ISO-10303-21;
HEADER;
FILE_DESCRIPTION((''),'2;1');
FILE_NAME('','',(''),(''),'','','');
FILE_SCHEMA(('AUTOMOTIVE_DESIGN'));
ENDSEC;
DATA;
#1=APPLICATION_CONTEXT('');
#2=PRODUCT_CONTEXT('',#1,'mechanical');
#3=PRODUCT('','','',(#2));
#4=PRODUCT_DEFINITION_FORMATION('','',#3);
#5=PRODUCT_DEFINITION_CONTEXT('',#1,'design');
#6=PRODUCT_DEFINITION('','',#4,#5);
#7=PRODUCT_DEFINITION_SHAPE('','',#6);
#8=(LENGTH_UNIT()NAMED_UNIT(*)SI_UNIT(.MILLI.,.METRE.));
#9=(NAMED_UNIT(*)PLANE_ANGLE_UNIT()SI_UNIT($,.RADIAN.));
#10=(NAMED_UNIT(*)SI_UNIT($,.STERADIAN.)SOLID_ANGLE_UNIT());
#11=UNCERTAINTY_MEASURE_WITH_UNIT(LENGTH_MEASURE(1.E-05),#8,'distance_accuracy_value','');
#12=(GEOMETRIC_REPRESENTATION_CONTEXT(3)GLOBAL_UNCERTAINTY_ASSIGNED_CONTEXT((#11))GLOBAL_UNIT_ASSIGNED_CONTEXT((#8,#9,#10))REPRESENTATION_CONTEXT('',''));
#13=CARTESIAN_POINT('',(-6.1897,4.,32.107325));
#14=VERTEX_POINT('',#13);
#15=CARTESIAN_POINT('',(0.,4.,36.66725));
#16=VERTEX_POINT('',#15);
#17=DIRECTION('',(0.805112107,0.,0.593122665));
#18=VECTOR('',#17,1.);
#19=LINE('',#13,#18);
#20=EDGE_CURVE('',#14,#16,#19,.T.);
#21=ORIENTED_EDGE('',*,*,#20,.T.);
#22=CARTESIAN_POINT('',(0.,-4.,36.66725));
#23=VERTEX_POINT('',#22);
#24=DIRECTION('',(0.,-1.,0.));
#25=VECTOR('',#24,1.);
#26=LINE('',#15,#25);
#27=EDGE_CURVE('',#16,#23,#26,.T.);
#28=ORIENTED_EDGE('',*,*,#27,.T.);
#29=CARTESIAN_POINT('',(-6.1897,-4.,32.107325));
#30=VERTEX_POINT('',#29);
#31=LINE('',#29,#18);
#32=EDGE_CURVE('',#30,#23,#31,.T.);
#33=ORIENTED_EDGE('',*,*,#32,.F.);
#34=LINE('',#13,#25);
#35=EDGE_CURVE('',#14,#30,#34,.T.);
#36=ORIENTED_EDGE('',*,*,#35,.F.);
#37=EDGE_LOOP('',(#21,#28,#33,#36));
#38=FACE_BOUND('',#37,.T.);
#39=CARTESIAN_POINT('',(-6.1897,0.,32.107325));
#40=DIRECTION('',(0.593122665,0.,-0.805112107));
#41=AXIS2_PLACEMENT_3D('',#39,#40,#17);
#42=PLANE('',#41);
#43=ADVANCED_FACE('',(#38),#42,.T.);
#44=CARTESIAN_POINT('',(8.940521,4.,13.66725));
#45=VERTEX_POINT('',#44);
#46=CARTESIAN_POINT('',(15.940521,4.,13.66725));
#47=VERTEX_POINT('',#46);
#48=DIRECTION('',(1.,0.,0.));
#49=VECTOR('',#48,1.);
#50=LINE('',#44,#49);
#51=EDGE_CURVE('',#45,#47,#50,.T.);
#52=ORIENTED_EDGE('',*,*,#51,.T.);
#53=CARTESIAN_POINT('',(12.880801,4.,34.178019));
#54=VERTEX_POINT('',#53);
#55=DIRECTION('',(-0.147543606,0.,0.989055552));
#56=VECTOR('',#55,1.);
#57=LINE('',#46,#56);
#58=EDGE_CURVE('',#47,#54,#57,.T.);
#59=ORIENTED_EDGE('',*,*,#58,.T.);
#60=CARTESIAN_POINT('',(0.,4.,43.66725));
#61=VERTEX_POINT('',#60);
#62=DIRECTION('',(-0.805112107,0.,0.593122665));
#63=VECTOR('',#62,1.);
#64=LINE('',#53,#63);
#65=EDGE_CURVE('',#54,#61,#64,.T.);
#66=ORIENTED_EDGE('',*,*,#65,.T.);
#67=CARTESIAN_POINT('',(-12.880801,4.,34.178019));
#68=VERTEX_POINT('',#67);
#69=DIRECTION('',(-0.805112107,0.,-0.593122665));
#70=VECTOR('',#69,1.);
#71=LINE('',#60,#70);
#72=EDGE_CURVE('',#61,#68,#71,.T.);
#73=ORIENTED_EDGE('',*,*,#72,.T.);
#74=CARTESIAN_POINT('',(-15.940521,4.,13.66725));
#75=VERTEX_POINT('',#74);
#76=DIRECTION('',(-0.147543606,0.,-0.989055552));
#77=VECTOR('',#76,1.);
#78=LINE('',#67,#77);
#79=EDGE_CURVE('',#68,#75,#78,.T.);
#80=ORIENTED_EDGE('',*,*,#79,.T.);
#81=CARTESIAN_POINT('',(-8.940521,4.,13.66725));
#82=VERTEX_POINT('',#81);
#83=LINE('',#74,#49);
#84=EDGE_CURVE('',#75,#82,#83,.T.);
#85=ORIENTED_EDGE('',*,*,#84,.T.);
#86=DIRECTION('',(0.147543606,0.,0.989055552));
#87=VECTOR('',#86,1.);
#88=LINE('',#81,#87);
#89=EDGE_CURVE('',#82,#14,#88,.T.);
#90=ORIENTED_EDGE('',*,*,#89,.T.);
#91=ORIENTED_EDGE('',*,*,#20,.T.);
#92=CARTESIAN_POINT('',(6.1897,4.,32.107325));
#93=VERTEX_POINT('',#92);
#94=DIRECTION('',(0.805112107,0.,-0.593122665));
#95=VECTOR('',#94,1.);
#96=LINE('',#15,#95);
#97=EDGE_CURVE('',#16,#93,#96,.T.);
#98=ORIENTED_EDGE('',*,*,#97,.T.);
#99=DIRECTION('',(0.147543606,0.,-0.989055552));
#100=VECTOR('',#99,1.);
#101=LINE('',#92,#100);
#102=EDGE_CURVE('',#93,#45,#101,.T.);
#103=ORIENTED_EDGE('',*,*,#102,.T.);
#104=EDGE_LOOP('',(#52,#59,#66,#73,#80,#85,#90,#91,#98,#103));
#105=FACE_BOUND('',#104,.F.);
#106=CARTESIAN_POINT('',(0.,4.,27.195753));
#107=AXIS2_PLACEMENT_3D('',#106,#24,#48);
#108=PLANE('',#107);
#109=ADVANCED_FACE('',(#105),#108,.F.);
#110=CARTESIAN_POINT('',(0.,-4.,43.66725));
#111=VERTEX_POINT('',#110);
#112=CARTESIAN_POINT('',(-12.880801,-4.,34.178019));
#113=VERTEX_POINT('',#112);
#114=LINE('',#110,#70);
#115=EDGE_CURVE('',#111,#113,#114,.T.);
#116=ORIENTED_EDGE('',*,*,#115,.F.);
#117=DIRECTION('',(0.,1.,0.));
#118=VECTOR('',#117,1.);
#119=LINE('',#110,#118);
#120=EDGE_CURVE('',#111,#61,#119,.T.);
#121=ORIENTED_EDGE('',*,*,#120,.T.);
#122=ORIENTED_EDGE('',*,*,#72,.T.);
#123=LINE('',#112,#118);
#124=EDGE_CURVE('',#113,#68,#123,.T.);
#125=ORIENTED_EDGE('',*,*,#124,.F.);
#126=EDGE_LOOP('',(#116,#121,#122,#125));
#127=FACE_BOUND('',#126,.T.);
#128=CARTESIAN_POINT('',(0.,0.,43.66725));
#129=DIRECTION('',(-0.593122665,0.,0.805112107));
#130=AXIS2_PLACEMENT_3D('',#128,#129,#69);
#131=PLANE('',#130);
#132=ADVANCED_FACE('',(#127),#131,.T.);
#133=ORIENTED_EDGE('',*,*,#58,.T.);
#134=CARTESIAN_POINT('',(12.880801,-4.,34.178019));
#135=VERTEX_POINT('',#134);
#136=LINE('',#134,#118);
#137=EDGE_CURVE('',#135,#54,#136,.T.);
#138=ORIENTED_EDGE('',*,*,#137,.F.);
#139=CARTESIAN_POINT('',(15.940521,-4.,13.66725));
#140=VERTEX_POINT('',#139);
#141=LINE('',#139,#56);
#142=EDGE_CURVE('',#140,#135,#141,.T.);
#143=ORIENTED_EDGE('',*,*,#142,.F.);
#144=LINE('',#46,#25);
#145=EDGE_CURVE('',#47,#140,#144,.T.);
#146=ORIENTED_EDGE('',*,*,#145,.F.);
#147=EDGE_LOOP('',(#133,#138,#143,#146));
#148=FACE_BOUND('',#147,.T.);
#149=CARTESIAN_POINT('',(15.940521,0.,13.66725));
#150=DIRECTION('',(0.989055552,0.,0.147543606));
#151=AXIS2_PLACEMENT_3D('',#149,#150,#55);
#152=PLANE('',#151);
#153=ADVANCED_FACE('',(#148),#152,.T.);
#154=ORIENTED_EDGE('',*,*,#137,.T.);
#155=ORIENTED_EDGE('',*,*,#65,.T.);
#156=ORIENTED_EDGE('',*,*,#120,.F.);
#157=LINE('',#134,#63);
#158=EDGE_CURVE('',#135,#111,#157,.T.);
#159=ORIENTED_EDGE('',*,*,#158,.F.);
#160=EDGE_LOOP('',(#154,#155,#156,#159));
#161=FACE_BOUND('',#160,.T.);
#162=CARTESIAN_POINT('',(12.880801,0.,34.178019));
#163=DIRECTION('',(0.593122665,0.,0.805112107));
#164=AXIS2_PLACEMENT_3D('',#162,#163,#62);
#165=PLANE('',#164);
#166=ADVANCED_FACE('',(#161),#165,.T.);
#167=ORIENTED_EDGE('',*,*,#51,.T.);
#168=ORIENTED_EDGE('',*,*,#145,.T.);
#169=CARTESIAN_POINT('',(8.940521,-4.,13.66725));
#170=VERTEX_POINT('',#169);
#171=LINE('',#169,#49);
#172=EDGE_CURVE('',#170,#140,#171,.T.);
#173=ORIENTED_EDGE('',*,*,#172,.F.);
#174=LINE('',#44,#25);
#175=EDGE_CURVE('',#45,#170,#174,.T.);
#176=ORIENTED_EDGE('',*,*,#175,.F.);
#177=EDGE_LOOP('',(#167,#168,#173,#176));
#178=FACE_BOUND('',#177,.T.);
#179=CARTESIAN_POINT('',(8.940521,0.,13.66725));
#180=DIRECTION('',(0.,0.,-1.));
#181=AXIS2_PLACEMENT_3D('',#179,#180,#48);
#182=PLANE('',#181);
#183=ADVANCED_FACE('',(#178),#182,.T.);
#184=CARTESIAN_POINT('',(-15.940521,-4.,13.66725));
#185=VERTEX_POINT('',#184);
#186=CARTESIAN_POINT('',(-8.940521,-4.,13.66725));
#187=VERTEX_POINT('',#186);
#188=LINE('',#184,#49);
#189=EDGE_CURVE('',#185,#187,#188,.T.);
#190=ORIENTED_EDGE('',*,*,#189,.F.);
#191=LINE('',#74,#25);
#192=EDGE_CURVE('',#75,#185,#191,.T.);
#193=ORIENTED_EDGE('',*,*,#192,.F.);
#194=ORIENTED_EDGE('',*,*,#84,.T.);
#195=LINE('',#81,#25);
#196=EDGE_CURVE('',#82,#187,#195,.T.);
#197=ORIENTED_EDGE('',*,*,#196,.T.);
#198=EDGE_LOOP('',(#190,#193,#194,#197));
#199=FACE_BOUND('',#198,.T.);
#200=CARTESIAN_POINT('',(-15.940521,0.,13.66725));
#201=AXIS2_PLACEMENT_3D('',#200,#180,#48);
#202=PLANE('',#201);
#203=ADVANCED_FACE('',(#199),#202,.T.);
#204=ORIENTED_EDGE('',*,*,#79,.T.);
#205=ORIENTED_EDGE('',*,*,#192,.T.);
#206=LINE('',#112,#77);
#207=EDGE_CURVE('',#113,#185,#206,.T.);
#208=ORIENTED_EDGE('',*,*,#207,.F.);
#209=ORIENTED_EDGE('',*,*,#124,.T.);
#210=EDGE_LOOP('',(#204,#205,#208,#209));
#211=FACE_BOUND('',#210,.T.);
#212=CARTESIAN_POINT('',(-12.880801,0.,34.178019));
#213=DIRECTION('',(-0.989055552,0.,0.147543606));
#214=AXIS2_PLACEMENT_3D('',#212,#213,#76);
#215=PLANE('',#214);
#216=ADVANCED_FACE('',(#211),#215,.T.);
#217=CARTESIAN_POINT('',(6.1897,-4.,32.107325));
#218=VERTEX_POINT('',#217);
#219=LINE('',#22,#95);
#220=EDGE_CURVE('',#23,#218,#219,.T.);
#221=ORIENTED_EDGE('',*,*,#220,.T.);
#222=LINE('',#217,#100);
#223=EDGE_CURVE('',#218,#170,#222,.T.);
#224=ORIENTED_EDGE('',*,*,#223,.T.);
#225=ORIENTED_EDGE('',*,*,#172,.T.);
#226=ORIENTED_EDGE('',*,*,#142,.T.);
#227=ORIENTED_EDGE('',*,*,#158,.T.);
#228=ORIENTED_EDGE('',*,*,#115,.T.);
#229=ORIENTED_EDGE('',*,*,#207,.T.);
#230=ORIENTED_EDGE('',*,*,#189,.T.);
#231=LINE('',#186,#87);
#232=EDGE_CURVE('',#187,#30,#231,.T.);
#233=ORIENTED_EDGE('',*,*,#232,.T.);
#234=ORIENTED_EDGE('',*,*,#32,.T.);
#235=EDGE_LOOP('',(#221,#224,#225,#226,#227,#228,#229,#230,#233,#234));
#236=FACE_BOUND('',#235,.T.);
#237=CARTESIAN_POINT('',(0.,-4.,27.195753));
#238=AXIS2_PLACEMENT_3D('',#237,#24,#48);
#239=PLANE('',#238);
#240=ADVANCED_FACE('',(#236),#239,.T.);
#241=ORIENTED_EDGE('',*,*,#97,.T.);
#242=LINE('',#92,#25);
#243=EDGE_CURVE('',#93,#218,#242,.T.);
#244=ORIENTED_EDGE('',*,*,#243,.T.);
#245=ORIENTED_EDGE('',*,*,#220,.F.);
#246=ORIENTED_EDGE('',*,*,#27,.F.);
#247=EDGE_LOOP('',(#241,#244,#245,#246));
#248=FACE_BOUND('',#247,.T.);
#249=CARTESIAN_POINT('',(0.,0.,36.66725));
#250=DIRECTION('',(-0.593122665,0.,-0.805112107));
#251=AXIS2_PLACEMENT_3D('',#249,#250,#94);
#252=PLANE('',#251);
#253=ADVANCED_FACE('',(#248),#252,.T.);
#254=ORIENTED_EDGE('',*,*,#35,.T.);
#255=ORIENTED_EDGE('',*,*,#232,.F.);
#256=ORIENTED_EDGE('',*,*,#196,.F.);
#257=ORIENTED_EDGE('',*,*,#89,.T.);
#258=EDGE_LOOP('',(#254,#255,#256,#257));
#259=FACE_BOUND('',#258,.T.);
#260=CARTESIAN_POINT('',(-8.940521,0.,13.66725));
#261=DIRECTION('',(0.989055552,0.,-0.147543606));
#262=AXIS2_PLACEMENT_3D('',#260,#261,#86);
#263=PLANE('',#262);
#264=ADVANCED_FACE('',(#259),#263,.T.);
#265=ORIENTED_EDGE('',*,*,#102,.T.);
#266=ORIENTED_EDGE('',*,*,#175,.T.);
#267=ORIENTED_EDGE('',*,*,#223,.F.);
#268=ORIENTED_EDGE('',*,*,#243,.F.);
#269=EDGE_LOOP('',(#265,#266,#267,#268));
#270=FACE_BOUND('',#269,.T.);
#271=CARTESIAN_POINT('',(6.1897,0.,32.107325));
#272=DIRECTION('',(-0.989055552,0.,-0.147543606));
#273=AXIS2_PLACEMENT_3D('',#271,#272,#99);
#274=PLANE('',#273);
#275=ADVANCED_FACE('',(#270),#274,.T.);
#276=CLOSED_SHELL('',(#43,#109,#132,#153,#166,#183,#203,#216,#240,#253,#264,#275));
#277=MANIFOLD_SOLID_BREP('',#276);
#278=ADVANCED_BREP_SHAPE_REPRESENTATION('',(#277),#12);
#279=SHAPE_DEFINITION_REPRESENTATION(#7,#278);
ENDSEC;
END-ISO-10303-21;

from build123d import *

# Parameters (mm, degrees)
F2_DEPTH = 4


# Not quite as in the source:
# - the program builds the solid bodies; features that only make, move or delete a surface that nothing else refers to are left out


with BuildPart() as f2:
    # F0 (on Front) → F2 (new body, symmetric)
    with BuildSketch(Plane.XZ):
        Polygon((-12.8808012232, 34.1780185699), (-15.9405209124, 13.6672500521), (-8.9405209124, 13.6672500521), (-6.189699587, 32.1073246897), (0, 36.6672500521), (6.189699587, 32.1073246897), (8.9405209124, 13.6672500521), (15.9405209124, 13.6672500521), (12.8808012232, 34.1780185699), (0, 43.6672500521), align=None)
    extrude(amount=F2_DEPTH, both=True)


solid = f2.part
